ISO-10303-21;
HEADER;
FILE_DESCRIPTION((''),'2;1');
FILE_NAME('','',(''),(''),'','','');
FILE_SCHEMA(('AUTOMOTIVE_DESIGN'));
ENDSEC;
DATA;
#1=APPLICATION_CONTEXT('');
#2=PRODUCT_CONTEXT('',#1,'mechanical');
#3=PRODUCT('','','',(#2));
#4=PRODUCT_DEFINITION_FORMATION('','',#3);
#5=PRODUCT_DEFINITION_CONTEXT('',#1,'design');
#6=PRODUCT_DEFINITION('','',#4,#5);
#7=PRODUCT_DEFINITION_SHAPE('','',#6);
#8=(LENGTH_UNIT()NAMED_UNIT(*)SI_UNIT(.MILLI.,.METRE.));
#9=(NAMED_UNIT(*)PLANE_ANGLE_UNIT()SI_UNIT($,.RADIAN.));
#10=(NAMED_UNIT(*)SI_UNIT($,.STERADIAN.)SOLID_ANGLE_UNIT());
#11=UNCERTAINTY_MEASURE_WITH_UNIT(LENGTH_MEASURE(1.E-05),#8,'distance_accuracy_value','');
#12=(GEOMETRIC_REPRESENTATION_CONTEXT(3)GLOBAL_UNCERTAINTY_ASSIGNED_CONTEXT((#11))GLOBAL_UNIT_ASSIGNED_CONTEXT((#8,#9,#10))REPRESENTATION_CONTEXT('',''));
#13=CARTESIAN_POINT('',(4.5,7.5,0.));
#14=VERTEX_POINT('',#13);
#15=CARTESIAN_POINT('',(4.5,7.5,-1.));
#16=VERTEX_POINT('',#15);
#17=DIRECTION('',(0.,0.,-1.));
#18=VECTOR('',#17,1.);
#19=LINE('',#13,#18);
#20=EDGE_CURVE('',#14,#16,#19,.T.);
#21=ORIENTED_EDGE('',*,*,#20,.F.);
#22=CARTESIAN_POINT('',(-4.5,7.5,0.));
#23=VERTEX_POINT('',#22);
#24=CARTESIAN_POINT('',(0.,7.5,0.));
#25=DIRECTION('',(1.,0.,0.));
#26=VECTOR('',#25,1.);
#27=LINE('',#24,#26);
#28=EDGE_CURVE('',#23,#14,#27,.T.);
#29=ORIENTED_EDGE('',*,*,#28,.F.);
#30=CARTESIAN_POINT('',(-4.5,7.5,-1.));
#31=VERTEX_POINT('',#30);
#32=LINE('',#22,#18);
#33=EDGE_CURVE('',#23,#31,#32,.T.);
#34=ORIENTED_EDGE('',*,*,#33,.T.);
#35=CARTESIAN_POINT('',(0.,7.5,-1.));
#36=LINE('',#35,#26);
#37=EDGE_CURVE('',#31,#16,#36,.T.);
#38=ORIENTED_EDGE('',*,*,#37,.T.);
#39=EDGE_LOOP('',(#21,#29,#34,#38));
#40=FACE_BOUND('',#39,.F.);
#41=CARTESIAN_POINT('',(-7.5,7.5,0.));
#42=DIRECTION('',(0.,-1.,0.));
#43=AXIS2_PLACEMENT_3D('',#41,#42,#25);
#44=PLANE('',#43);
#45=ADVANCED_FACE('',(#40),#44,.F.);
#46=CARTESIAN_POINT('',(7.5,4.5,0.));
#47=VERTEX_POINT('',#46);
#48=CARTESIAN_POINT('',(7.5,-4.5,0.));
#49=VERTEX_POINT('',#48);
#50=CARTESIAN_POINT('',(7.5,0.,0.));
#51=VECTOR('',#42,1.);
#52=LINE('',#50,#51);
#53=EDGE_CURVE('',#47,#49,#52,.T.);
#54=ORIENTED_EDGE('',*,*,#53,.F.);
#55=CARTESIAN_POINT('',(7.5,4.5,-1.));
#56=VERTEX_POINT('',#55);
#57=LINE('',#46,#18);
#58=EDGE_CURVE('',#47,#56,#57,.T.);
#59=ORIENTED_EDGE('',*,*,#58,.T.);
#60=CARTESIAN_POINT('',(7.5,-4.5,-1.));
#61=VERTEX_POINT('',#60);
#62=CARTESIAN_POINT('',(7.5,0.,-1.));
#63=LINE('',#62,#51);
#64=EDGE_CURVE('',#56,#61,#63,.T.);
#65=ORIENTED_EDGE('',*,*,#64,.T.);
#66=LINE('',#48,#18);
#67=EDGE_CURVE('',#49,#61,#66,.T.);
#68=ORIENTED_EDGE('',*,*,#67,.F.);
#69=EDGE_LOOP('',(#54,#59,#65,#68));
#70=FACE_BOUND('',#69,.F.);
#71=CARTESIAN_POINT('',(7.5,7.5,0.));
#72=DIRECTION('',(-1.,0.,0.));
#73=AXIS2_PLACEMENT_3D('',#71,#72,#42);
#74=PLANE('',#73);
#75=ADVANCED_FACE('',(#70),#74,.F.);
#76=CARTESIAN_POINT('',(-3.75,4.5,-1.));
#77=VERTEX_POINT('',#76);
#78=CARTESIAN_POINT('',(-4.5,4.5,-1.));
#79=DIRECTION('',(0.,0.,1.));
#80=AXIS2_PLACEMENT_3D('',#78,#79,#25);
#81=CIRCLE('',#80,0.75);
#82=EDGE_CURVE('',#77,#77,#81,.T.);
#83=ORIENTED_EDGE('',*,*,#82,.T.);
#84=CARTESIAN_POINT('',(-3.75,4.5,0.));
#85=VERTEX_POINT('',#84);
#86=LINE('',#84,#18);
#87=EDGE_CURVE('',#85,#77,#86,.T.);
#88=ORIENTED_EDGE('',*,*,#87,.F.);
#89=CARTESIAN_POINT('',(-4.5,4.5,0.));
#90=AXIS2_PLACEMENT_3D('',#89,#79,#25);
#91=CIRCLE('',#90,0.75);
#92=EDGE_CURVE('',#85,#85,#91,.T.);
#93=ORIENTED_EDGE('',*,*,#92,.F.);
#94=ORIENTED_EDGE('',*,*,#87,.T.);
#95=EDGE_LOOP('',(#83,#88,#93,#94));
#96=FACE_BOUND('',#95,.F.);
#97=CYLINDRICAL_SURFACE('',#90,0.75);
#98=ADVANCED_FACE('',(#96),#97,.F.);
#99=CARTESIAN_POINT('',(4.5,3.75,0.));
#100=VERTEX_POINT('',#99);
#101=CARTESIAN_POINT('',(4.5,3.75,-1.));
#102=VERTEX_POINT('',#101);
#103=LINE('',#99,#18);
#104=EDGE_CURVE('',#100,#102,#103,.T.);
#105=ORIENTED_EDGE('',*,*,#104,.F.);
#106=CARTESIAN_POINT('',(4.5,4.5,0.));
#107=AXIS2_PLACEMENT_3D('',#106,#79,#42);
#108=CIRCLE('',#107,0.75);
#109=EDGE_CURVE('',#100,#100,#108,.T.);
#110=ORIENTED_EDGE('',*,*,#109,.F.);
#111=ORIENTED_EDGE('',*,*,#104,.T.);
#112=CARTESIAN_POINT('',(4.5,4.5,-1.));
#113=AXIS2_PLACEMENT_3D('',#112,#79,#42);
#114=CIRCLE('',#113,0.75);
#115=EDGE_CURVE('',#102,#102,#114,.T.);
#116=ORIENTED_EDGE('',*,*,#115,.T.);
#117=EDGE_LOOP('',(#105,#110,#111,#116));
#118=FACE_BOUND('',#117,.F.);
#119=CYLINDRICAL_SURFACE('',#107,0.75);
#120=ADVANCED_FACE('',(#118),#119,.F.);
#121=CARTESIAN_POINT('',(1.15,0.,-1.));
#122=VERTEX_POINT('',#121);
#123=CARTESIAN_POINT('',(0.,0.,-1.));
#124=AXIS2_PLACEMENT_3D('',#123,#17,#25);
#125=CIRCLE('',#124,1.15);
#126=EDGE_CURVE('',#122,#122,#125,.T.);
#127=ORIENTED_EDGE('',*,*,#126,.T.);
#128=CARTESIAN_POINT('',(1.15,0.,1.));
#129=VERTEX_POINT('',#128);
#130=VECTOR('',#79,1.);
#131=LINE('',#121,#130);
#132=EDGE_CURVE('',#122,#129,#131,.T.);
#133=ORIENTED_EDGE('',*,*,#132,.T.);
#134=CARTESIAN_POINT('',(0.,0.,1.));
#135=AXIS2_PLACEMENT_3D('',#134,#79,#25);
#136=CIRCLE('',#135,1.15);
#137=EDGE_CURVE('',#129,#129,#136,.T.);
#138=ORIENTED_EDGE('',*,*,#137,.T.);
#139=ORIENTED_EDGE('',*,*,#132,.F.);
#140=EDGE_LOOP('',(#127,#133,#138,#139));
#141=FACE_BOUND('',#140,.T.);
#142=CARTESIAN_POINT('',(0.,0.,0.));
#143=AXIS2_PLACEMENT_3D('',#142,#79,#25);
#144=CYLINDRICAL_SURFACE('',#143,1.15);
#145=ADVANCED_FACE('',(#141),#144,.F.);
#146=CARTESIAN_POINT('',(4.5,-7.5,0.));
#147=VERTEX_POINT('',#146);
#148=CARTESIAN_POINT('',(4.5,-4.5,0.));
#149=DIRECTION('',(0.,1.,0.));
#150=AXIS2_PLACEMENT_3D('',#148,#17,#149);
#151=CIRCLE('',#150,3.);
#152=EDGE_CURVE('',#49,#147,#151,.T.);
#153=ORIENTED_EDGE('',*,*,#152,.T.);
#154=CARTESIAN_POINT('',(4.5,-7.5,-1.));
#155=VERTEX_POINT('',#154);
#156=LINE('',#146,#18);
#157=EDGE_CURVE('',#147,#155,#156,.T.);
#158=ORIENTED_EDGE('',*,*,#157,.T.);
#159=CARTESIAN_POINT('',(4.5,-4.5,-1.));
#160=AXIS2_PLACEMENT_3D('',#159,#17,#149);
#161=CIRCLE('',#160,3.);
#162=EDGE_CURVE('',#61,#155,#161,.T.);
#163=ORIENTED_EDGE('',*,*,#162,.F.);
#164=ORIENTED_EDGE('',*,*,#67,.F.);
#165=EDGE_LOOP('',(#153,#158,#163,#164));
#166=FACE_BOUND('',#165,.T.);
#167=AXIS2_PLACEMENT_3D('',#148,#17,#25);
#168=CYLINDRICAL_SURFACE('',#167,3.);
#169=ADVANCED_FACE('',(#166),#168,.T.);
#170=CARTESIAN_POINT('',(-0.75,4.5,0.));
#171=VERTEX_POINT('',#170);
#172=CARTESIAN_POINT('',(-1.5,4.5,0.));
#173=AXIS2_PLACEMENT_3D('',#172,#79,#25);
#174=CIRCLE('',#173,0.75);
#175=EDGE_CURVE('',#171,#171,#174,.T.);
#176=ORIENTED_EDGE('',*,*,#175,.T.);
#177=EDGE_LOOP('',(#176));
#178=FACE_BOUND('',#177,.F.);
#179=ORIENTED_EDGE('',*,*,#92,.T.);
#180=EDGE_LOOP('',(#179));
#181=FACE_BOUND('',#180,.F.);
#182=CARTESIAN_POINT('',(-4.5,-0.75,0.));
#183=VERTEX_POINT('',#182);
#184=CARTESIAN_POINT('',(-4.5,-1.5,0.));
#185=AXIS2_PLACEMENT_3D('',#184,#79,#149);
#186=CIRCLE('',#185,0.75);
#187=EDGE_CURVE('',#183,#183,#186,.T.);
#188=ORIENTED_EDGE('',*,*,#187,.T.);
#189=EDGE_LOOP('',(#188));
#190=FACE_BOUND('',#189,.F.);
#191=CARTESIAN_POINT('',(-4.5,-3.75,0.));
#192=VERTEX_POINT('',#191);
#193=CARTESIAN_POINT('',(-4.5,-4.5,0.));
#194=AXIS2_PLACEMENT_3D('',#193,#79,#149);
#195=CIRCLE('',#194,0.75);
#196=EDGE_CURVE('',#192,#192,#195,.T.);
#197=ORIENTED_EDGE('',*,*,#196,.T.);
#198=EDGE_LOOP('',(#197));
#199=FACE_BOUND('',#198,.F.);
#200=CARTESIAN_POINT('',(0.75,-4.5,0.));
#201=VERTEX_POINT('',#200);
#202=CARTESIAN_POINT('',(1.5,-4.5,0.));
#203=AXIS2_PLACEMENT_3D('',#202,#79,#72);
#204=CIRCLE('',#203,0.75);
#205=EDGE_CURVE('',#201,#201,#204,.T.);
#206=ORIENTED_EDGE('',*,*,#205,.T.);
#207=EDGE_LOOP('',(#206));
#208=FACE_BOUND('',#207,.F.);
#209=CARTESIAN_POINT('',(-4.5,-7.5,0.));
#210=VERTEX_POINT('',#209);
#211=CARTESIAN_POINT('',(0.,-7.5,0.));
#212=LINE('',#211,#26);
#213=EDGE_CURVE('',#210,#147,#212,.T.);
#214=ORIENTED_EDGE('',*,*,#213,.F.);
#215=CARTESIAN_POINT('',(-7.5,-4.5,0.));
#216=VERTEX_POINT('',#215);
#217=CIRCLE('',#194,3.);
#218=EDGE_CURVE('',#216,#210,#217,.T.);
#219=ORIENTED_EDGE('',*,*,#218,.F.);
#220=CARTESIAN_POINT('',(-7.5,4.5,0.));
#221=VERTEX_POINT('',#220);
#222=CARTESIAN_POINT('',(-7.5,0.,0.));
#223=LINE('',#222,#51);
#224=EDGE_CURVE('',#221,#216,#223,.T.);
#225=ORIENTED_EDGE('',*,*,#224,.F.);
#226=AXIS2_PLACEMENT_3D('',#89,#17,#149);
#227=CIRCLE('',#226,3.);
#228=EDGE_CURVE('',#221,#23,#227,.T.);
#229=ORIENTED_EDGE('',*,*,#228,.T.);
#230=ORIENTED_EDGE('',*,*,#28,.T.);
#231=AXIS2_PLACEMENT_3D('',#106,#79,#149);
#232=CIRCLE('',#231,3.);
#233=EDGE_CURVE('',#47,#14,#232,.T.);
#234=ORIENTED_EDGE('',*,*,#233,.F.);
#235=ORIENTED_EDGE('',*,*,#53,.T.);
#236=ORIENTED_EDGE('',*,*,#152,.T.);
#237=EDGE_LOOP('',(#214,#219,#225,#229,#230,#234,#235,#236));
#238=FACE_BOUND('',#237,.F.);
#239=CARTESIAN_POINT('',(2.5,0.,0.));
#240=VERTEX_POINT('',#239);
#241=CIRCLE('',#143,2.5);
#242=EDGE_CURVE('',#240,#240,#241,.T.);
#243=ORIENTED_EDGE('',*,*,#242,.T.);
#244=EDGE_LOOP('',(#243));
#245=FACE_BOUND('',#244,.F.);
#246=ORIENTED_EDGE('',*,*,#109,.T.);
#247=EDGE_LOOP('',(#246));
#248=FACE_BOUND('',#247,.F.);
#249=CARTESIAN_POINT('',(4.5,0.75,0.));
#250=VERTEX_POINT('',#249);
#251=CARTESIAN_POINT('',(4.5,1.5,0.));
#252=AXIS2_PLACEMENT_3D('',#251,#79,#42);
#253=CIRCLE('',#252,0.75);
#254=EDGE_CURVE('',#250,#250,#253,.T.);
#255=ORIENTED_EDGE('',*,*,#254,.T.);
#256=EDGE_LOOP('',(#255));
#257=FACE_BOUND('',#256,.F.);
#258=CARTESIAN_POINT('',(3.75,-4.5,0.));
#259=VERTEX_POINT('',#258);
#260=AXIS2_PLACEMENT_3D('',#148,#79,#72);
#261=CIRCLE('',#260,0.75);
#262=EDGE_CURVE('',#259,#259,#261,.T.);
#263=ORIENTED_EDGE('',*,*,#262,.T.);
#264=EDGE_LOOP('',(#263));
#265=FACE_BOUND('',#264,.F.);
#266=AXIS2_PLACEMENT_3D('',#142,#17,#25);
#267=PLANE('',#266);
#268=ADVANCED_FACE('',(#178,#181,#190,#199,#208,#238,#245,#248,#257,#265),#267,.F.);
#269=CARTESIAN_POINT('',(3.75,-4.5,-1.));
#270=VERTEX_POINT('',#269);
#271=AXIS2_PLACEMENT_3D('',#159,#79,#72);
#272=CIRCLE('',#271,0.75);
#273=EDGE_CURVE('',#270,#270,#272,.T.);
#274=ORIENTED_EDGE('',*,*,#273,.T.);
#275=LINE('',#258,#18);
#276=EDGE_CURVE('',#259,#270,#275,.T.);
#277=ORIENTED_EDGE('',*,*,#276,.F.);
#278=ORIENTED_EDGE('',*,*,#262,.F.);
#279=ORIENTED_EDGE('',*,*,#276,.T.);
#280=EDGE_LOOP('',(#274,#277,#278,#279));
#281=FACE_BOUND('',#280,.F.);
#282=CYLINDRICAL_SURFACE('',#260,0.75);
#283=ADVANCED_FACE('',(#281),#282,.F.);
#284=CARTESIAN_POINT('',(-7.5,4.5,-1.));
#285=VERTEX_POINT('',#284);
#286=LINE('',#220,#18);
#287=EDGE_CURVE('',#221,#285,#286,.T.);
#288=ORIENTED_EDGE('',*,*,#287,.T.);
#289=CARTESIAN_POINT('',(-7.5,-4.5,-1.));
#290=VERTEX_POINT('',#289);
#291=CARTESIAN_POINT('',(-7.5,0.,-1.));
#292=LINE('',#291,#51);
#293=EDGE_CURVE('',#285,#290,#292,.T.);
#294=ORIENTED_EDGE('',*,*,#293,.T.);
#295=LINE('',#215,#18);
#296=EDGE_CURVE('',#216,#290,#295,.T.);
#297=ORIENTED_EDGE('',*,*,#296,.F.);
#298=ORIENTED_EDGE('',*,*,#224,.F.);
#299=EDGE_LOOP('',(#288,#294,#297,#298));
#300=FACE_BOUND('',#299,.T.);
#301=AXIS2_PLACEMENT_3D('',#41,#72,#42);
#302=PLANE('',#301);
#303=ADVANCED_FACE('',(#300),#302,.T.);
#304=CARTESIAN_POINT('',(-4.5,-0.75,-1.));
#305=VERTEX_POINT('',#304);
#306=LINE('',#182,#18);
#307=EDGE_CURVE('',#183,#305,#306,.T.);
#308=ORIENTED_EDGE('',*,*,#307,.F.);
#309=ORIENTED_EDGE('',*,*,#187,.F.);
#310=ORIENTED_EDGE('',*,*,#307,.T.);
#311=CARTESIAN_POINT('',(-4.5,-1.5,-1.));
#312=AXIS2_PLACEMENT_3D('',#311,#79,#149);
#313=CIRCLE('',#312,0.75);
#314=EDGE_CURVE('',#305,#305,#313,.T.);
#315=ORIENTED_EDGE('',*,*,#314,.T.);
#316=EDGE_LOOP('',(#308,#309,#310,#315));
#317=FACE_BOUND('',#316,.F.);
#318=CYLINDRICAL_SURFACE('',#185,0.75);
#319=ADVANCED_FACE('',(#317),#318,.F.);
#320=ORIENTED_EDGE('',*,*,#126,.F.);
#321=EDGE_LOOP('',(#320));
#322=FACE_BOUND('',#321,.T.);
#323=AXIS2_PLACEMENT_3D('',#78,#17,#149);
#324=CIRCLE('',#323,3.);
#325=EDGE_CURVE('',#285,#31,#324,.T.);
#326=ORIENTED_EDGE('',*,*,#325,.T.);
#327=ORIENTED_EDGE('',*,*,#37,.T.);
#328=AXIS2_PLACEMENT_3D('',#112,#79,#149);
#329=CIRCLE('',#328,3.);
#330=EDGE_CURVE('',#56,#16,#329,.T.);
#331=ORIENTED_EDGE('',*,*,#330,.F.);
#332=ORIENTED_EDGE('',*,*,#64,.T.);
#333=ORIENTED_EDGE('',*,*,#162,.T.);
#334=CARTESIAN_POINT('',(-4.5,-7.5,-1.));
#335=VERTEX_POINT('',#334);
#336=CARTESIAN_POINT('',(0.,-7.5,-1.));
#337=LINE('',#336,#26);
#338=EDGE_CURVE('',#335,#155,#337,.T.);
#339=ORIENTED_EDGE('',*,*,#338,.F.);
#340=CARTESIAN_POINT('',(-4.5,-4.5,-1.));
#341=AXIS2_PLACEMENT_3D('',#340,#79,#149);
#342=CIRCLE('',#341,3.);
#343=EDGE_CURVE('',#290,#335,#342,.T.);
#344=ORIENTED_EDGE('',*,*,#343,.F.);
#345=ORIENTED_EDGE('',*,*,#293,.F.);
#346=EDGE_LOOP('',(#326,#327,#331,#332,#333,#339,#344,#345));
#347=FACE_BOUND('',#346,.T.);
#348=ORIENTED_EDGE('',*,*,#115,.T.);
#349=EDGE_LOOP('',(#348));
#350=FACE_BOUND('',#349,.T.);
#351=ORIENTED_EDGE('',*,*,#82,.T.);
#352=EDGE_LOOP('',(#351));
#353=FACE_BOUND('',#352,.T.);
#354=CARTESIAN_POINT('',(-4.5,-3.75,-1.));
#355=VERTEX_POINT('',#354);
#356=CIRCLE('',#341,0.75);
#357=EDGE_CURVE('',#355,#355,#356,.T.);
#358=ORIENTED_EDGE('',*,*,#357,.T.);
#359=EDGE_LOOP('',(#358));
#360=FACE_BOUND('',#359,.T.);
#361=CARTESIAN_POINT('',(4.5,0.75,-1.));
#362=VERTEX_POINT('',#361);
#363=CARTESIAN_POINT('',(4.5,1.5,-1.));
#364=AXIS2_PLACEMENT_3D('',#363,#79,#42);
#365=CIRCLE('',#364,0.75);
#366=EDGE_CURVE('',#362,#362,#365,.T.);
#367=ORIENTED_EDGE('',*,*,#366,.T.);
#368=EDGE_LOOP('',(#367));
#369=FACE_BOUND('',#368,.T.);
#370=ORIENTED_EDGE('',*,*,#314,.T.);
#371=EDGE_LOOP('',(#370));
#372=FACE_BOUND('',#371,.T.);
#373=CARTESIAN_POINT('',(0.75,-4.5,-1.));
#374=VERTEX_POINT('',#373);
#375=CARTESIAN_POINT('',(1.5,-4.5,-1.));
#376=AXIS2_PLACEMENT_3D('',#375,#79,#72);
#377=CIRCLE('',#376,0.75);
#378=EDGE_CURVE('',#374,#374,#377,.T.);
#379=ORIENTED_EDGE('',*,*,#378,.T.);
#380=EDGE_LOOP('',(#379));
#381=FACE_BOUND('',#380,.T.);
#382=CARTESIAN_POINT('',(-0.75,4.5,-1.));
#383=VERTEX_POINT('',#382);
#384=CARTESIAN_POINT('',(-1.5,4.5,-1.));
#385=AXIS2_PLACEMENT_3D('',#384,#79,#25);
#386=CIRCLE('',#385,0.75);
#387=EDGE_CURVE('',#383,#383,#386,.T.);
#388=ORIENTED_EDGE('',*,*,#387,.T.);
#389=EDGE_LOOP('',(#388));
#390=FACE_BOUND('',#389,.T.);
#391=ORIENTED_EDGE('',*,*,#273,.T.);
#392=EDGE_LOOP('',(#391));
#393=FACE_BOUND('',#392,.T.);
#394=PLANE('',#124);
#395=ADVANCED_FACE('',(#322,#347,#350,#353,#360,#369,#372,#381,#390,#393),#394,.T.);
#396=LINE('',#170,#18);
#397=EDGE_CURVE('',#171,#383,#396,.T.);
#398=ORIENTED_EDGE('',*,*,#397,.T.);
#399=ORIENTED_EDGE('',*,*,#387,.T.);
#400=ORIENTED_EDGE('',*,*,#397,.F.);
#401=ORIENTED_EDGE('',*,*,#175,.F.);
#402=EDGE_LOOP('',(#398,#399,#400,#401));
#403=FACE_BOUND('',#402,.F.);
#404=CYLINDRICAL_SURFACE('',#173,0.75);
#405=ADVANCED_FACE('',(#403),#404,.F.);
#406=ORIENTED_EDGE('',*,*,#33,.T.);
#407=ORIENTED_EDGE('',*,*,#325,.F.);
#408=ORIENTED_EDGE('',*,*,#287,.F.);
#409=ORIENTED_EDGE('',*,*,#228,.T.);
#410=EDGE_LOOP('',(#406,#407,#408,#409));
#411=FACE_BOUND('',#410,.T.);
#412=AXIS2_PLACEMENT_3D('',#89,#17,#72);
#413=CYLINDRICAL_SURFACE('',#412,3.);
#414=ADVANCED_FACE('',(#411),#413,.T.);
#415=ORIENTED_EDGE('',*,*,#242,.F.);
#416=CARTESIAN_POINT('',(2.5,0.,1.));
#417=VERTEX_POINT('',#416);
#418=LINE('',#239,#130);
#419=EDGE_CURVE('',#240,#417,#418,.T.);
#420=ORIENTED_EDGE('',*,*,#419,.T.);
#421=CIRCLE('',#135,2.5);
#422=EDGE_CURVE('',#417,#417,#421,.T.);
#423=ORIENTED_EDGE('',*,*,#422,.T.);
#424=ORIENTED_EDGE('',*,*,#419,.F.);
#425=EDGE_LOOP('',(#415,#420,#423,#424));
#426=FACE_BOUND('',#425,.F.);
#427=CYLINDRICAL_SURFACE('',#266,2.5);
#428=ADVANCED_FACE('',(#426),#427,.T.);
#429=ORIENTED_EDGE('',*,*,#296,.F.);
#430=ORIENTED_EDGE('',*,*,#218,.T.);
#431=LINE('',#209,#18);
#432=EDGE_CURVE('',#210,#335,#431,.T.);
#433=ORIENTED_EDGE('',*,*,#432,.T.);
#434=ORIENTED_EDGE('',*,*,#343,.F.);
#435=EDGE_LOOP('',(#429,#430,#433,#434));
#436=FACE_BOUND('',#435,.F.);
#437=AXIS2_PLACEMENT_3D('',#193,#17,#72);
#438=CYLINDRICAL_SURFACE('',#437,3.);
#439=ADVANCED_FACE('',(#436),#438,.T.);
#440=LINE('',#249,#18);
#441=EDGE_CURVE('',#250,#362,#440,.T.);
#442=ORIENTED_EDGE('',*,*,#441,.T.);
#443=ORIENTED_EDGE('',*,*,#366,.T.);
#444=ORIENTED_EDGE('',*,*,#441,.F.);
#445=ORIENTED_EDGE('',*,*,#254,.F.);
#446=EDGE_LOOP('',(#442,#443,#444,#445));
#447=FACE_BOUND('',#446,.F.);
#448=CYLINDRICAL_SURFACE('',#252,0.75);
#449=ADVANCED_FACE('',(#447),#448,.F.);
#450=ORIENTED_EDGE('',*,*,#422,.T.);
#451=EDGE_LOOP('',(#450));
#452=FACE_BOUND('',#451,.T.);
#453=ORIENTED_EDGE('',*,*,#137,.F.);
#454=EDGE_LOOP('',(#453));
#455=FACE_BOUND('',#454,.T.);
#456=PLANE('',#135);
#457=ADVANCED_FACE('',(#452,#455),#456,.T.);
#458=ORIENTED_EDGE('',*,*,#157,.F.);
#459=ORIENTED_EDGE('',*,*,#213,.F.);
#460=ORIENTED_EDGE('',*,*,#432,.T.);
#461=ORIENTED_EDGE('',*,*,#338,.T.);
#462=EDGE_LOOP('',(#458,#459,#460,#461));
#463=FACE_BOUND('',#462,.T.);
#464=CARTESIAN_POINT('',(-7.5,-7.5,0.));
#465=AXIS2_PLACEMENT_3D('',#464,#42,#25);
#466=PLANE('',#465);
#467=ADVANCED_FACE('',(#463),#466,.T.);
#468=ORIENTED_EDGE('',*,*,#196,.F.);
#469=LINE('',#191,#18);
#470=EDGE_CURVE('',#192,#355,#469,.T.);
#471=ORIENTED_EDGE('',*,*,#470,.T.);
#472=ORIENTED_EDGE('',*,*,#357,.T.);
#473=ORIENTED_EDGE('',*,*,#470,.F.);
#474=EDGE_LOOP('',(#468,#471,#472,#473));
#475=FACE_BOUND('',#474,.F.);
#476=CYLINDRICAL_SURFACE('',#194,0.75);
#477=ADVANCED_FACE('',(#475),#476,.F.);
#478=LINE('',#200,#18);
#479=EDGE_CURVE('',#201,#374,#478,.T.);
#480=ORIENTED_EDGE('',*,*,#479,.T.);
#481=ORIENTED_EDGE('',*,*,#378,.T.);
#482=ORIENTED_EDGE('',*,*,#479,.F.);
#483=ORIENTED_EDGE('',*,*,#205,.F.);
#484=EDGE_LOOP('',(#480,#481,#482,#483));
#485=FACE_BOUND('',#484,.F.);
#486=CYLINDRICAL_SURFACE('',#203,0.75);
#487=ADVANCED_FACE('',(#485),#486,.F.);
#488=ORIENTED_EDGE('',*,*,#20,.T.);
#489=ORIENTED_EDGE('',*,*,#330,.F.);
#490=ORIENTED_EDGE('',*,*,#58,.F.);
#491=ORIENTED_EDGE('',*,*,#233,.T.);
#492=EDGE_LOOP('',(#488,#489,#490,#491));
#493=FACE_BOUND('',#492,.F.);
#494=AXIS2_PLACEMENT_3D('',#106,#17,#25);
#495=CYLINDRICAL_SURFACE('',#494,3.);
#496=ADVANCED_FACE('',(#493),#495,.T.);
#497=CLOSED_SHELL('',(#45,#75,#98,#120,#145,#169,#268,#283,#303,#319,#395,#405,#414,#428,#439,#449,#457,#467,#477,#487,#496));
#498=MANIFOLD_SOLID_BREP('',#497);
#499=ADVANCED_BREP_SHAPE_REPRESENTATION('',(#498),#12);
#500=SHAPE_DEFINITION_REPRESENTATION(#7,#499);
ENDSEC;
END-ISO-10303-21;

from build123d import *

# Parameters (mm, degrees)
F0_R            = 2.5
F0_R_2          = 1.15
F1_DEPTH        = 1
F2_W            = 15
F2_H            = 15
F2_R            = 5
F2_R_2          = 2.5
F2_R_3          = 1.15
F3_DEPTH        = 1
F4_R            = 3
F5_R            = 0.75
F6_DEPTH        = 25
F6_COPIES_COUNT = 4


# Not quite as in the source:
# - a pattern or mirror of a feature is missing from the dataset's text; its kind, count and spacing are read off the source's solid


with BuildPart() as f1:
    # F0 (on Top) → F1 (new body)
    with BuildSketch(Plane.XY):
        Circle(F0_R)
        Circle(F0_R_2, mode=Mode.SUBTRACT)
    extrude(amount=F1_DEPTH)

    # F2 (on face) → F3 (join)
    with BuildSketch(Plane(origin=(0, 0, 0), x_dir=(1, 0, 0), z_dir=(0, 0, -1))):
        Rectangle(F2_W, F2_H)
        Circle(F2_R, mode=Mode.SUBTRACT)
        Circle(F2_R)
        Circle(F2_R_2, mode=Mode.SUBTRACT)
        Circle(F2_R_2)
        Circle(F2_R_3, mode=Mode.SUBTRACT)
    extrude(amount=F3_DEPTH)

    # F4
    f4_edges = [f1.edges().sort_by_distance(p)[0] for p in [
        (-7.5, 7.5, -0.5),
        (7.5, 7.5, -0.5),
        (-7.5, -7.5, -0.5),
        (7.5, -7.5, -0.5),
    ]]
    fillet(f4_edges, radius=F4_R)

    # F5 (on face) → F6 (cut)
    with BuildSketch(Plane.XY):
        with Locations((-4.5, 4.5)):
            Circle(F5_R)
        with Locations((-1.5, 4.5)):
            Circle(F5_R)
    f6 = extrude(amount=-F6_DEPTH, mode=Mode.SUBTRACT)

    # F6_copies: F6 ×4 about axis
    f6_copies_axis = Axis((0, 0, 0), (0, 0, 1))
    for i in range(1, F6_COPIES_COUNT):
        add(f6.rotate(f6_copies_axis, i * 360 / F6_COPIES_COUNT), mode=Mode.SUBTRACT)


solid = f1.part
